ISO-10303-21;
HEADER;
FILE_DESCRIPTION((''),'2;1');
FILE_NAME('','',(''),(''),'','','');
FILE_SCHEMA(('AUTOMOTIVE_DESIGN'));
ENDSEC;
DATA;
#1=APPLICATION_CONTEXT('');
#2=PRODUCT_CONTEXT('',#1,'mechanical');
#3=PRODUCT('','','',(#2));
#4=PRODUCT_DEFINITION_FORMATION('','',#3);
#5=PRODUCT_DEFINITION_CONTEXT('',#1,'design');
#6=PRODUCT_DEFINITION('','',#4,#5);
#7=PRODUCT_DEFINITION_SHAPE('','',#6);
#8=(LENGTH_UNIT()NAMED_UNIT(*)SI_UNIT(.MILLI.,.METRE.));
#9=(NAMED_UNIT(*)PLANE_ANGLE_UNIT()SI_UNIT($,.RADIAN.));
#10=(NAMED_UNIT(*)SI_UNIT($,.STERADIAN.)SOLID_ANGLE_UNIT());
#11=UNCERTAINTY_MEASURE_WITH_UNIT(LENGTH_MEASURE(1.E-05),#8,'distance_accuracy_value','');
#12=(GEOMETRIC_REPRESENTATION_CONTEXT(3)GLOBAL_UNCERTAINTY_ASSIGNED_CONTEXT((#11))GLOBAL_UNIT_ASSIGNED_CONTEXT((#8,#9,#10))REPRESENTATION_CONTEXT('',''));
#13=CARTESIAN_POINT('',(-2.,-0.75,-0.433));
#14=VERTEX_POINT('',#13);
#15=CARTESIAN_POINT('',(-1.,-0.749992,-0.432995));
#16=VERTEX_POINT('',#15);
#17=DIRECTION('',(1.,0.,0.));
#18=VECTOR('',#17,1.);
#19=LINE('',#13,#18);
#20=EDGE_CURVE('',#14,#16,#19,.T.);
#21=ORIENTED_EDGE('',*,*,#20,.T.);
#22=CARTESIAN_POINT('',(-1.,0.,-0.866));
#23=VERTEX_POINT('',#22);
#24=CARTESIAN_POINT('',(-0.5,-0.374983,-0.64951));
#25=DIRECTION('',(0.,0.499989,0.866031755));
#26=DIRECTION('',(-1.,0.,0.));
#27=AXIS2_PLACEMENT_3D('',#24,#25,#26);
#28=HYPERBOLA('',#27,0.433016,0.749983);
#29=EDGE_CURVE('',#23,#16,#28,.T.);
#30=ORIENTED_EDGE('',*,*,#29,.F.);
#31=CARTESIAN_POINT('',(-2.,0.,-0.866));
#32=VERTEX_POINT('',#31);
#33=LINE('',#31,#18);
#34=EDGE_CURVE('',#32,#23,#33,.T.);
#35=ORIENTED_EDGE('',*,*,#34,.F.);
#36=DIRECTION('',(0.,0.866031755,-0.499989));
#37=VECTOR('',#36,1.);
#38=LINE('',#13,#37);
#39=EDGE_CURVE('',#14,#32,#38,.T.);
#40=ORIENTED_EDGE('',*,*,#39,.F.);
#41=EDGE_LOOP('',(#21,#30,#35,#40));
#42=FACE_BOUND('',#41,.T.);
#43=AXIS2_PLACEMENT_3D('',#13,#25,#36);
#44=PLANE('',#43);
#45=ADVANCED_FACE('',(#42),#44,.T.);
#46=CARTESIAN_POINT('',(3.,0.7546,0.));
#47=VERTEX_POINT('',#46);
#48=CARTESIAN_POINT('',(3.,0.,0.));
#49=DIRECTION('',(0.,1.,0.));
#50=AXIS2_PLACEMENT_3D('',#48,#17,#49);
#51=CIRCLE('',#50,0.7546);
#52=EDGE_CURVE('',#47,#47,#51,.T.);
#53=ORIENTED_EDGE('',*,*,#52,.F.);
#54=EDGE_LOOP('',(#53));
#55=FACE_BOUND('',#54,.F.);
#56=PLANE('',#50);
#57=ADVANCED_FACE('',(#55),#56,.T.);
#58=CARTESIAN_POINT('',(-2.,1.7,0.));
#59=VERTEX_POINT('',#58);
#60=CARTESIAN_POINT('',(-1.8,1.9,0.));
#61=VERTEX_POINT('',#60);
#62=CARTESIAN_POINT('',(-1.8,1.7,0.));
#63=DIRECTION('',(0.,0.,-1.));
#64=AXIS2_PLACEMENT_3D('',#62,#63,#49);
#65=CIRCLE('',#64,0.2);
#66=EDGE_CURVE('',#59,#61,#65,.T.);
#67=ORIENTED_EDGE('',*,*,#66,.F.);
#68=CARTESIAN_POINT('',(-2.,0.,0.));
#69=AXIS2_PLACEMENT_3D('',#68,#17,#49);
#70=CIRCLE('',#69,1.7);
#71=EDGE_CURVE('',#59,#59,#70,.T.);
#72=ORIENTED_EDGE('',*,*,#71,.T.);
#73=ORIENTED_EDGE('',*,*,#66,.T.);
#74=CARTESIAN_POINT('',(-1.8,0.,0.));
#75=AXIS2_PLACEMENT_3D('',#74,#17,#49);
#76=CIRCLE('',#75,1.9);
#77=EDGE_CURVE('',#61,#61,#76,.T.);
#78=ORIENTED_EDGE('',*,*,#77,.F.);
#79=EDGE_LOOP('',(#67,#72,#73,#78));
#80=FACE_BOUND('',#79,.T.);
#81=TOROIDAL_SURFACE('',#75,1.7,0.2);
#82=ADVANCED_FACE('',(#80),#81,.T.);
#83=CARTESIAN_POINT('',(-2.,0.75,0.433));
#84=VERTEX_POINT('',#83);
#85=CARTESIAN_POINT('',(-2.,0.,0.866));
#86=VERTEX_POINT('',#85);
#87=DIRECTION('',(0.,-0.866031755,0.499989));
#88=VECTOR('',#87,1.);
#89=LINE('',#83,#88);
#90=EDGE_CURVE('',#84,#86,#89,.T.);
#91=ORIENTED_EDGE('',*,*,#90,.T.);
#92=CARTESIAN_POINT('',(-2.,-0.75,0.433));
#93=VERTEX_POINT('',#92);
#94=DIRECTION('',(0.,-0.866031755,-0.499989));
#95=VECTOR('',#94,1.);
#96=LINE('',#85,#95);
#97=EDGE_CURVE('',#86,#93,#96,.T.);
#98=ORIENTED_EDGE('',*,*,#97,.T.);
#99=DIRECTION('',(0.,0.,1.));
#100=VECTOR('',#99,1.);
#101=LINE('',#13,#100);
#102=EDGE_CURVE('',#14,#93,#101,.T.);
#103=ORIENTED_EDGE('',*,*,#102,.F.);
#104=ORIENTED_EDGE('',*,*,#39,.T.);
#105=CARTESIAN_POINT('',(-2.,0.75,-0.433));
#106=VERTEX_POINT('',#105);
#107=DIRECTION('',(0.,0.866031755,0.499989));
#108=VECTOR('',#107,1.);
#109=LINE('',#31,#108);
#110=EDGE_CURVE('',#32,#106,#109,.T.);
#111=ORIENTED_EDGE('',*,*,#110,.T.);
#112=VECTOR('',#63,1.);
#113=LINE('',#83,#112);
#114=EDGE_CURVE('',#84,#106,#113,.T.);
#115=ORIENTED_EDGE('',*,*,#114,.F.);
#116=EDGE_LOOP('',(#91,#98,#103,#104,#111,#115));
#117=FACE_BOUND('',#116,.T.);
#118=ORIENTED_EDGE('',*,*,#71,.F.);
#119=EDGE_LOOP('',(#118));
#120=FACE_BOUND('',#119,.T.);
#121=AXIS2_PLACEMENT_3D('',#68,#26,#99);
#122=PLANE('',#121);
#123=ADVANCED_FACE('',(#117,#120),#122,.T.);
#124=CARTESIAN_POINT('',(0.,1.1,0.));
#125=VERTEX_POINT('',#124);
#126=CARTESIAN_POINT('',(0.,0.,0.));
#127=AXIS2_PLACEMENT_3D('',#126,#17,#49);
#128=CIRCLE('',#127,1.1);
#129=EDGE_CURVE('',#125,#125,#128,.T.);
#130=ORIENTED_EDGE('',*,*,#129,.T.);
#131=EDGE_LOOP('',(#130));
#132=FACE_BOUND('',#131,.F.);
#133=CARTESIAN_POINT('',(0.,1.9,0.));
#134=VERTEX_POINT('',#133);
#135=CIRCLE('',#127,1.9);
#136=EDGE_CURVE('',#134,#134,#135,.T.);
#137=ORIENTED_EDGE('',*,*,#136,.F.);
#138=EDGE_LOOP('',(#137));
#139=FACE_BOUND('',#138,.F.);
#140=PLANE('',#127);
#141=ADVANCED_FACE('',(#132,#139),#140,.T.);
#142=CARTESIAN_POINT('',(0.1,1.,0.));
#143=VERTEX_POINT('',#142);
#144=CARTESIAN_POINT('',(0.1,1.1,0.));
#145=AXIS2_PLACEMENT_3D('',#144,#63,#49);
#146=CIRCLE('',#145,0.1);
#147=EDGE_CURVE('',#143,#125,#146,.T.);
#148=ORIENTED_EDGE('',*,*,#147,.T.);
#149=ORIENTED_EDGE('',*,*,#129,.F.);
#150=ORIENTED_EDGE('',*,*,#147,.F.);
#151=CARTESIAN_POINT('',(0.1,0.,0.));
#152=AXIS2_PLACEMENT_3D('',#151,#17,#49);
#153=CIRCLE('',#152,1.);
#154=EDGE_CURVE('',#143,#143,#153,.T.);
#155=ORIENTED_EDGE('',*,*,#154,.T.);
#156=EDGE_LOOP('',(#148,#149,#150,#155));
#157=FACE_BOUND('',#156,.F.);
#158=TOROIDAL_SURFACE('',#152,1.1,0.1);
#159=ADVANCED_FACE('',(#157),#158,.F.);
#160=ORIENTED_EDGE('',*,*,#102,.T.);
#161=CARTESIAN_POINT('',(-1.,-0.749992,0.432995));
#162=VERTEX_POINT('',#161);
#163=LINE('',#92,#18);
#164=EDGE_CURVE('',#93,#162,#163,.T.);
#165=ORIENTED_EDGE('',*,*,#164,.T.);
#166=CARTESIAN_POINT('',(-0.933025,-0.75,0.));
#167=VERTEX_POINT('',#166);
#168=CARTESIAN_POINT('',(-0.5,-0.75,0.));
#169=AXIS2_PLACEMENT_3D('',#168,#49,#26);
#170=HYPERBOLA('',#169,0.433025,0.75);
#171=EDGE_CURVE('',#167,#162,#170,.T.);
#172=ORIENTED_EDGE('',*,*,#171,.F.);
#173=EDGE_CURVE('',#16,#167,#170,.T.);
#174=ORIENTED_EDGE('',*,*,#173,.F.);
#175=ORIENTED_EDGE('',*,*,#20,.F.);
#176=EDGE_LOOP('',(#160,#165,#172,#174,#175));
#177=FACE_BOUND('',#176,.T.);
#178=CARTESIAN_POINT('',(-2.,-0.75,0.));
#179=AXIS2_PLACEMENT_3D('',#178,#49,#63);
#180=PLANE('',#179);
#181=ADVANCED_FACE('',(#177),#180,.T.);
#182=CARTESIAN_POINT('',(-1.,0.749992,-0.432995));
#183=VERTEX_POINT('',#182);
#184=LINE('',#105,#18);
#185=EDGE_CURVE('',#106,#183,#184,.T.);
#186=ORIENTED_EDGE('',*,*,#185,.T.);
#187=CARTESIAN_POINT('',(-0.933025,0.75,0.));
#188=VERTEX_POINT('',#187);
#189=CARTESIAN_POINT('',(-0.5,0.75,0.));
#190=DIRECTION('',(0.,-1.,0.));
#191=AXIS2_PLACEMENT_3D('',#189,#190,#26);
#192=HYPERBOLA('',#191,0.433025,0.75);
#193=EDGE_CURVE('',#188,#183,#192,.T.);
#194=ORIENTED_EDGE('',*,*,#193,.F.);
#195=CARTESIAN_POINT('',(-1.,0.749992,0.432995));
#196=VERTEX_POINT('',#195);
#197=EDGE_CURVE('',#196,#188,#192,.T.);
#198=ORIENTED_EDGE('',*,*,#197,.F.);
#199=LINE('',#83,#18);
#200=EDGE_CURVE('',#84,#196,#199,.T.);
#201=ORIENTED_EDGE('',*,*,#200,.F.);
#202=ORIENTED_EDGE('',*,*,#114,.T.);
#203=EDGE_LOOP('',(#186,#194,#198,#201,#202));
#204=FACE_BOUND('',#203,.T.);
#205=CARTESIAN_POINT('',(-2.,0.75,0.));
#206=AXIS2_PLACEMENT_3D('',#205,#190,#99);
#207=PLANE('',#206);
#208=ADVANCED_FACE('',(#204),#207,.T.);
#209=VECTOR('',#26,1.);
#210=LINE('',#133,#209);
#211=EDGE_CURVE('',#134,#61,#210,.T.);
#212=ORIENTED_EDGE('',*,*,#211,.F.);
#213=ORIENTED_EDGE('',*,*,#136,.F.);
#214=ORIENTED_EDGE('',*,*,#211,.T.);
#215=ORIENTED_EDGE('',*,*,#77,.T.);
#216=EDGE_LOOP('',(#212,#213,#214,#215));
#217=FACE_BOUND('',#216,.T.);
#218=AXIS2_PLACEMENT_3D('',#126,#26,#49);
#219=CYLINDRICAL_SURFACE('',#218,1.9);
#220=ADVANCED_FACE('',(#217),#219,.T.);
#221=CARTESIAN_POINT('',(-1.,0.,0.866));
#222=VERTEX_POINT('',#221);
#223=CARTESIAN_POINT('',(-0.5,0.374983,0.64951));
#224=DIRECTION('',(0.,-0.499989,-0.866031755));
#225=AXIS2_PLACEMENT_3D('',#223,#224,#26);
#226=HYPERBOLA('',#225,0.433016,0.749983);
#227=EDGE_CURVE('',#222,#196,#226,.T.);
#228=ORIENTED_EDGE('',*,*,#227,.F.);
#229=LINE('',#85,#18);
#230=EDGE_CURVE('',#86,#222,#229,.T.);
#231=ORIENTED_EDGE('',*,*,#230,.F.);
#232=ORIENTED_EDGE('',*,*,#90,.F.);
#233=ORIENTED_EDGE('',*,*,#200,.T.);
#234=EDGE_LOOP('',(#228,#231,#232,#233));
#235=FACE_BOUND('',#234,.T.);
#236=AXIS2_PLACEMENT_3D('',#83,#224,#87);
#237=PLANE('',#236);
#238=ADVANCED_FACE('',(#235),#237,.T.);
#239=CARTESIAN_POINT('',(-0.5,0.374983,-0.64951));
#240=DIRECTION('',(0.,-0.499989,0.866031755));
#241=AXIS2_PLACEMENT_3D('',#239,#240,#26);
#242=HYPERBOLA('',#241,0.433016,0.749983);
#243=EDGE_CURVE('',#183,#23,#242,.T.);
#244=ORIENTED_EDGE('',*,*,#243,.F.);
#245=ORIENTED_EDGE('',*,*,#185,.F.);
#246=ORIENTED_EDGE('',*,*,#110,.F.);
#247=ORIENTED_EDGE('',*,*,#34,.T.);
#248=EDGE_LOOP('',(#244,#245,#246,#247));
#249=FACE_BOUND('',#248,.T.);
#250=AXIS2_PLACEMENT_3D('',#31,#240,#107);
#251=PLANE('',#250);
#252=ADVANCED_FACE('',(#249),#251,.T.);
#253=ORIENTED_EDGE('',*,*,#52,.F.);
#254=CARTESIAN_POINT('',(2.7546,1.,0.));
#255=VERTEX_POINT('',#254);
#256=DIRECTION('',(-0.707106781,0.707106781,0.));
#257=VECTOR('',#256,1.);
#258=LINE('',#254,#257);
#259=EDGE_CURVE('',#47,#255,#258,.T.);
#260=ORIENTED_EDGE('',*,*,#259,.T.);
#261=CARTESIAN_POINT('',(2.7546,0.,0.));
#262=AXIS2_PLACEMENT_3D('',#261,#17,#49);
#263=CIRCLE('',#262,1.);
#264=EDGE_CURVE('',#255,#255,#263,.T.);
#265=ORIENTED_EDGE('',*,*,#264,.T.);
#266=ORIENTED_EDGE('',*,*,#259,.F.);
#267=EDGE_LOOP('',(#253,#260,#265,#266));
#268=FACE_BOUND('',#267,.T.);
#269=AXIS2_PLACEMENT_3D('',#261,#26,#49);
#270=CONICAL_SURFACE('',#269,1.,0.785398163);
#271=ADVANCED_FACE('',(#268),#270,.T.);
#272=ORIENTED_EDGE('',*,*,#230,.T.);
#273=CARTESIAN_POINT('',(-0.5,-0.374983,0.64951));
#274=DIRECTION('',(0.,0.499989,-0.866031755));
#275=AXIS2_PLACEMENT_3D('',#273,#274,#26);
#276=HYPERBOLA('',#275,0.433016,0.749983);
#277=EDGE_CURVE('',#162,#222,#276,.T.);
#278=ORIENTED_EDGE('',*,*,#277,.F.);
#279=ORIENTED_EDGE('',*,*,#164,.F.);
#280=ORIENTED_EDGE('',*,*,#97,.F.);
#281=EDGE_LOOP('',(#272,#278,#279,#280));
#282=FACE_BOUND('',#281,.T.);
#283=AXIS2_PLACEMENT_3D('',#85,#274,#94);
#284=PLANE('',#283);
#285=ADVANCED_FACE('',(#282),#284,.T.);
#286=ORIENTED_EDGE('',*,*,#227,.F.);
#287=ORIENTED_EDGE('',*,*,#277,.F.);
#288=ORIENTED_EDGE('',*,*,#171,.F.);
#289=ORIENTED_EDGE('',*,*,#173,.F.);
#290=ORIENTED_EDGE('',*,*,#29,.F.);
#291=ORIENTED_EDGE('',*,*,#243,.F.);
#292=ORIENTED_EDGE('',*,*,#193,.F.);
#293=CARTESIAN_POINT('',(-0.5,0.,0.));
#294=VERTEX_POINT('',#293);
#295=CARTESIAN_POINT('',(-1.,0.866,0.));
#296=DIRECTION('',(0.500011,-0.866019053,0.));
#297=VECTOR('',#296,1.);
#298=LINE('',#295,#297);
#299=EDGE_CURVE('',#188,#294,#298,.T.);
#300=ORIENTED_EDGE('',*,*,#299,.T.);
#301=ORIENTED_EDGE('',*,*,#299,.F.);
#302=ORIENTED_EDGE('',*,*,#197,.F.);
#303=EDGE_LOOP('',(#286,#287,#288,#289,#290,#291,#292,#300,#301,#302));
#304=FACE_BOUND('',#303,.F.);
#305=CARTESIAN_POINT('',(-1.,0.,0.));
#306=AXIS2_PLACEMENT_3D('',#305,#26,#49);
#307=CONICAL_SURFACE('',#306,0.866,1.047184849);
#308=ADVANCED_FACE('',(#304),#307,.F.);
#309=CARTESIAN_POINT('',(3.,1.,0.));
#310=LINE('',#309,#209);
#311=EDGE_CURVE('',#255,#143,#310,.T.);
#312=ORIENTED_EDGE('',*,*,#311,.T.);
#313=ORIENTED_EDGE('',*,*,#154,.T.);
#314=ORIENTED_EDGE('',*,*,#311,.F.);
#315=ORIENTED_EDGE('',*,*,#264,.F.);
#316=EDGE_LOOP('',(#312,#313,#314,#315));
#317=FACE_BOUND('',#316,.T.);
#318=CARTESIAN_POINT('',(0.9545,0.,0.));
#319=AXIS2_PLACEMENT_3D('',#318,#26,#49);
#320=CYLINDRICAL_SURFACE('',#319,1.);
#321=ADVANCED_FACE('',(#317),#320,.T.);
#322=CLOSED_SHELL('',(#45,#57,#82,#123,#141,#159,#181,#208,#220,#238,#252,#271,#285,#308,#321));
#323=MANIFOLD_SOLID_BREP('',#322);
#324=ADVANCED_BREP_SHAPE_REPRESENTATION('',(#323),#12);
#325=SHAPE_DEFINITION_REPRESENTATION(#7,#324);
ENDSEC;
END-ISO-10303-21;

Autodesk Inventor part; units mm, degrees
ref_plane "YZ Plane" through (0, 0, 0) normal (1, 0, 0) x (0, 1, 0)
ref_plane "XZ Plane" through (0, 0, 0) normal (0, 1, 0) x (-1, 0, 0)
sketch "Skizze1" plane through (0, 0, 0) normal (0, 0, 1) x (1, 0, 0)
  line L0 (-0.5, 0) -> (3, 0)
  line L1 (3, 0) -> (3, 1)
  line L2 (3, 1) -> (1.2, 1)
  line L3 (1.2, 1) -> (0.9545, 1)
  line L4 (0.9545, 1) -> (0, 1)
  line L5 (0, 1) -> (0, 1.9)
  line L6 (0, 1.9) -> (-2, 1.9)
  line L7 (-2, 1.9) -> (-2, 0.866)
  line L8 (-2, 0.866) -> (-1, 0.866)
  line L9 (-1, 0.866) -> (-0.5, 0)
  line L10 (-3, 0) -> (4, 0) projected
  line L11 (0, -0.38) -> (0, 2.28) projected
  line L12 (1.2, 1) -> (0, 1) construction
  dimension "d1" = 1.8
  dimension "d2" = 0.2455
  dimension "d3" = 2
  dimension "d4" = 1
  dimension "d5" = 60
  dimension "d6" = 2
  dimension "d7" = 2
  dimension "d8" = 1.7321
  dimension "d9" = 3.8
  dimension "d26" = 3
revolve "Körper" add sketch "Skizze1" angle 360 about axis through (-0.5, 0, 0) along (1, 0, 0)
sketch "Skizze2" plane through (-2, 0, 0) normal (-1, 0, 0) x (0, 0, 1)
  circle A0 centre (0, 0) radius 0.866 projected
  line L0 (0, -2.66) -> (0, 2.66) projected
  line L1 (-2.66, 0) -> (2.66, 0) projected
  line L2 (0.866, 0) -> (0.433, -0.75)
  line L3 (0.433, -0.75) -> (-0.433, -0.75)
  line L4 (-0.433, -0.75) -> (-0.866, 0)
  line L5 (-0.866, 0) -> (-0.433, 0.75)
  line L6 (-0.433, 0.75) -> (0.433, 0.75)
  line L7 (0.433, 0.75) -> (0.866, 0)
extrude "Loch" add sketch "Skizze2" against normal up to next contours L7 A0 | A0 L2 | L6 L0 A0 | A0 L0 L3 | L0 L6 A0 | A0 L3 L0 | L4 A0 | A0 L5
fillet "Rundung1" radius 0.2 1 edges at (-2, -1.9, 0)
thread "Gewinde" size "M2x0.4" class "6g" standard "ISO Metric profile" length 1.8
chamfer "Fase1" distance 0.2454 distance2 0.2454 1 edges at (3, -1, 0) measured on face at (3, -0.4588, -0.3309)
ref_plane "Work Plane1" through (29, 0, 0) normal (0, -1, 0) x (1, 0, 0)
fillet "Fillet2" radius 0.1 1 edges at (0, -1, 0)
equation "\"d30\" = R"
equation "\"d15\" = -0.5 * SPD + 0.5 * GD"
equation "\"d16\" = GUL"
equation "\"d17\" = RR"
equation "\"d13\" = GEL"
equation "\"d1\" = GEL"
equation "\"d3\" = KOH"
equation "\"d4\" = INTI"
equation "\"d6\" = GD"
equation "\"d7\" = BDM"
equation "\"d8\" = 1.1547 * SW"
equation "\"d9\" = KOD"
equation "\"d26\" = NLG"
equation "\"GD\" = 2"
equation "\"NLG\" = 3"
equation "\"GEL\" = 1.8"
equation "\"KOD\" = 3.8"
equation "\"KOH\" = 2"
equation "\"INTI\" = 1"
equation "\"GAL\" = 0.61345 * PTC"
equation "\"GUL\" = 0.61345 * PTC"
equation "\"BDM\" = NND"
equation "\"SW\" = 1.5"
equation "\"RR\" = 0.2"
equation "\"SPD\" = NND - 1.2269 * PTC"
equation "\"R\" = 0.1"
equation "\"TOA\" = 30deg"
equation "\"GD1\" = THREADDIA - 1.2269 * PTC"
equation "\"THREADDIA\" = 2"
equation "\"FAWI\" = 45deg"
equation "\"PTC\" = 0.4"
equation "\"NND\" = 2"
equation "\"E0\" = 1.155 * SW"
properties part number "ISO 4762  - M2 x 3" material "Edelstahl, 440C"
